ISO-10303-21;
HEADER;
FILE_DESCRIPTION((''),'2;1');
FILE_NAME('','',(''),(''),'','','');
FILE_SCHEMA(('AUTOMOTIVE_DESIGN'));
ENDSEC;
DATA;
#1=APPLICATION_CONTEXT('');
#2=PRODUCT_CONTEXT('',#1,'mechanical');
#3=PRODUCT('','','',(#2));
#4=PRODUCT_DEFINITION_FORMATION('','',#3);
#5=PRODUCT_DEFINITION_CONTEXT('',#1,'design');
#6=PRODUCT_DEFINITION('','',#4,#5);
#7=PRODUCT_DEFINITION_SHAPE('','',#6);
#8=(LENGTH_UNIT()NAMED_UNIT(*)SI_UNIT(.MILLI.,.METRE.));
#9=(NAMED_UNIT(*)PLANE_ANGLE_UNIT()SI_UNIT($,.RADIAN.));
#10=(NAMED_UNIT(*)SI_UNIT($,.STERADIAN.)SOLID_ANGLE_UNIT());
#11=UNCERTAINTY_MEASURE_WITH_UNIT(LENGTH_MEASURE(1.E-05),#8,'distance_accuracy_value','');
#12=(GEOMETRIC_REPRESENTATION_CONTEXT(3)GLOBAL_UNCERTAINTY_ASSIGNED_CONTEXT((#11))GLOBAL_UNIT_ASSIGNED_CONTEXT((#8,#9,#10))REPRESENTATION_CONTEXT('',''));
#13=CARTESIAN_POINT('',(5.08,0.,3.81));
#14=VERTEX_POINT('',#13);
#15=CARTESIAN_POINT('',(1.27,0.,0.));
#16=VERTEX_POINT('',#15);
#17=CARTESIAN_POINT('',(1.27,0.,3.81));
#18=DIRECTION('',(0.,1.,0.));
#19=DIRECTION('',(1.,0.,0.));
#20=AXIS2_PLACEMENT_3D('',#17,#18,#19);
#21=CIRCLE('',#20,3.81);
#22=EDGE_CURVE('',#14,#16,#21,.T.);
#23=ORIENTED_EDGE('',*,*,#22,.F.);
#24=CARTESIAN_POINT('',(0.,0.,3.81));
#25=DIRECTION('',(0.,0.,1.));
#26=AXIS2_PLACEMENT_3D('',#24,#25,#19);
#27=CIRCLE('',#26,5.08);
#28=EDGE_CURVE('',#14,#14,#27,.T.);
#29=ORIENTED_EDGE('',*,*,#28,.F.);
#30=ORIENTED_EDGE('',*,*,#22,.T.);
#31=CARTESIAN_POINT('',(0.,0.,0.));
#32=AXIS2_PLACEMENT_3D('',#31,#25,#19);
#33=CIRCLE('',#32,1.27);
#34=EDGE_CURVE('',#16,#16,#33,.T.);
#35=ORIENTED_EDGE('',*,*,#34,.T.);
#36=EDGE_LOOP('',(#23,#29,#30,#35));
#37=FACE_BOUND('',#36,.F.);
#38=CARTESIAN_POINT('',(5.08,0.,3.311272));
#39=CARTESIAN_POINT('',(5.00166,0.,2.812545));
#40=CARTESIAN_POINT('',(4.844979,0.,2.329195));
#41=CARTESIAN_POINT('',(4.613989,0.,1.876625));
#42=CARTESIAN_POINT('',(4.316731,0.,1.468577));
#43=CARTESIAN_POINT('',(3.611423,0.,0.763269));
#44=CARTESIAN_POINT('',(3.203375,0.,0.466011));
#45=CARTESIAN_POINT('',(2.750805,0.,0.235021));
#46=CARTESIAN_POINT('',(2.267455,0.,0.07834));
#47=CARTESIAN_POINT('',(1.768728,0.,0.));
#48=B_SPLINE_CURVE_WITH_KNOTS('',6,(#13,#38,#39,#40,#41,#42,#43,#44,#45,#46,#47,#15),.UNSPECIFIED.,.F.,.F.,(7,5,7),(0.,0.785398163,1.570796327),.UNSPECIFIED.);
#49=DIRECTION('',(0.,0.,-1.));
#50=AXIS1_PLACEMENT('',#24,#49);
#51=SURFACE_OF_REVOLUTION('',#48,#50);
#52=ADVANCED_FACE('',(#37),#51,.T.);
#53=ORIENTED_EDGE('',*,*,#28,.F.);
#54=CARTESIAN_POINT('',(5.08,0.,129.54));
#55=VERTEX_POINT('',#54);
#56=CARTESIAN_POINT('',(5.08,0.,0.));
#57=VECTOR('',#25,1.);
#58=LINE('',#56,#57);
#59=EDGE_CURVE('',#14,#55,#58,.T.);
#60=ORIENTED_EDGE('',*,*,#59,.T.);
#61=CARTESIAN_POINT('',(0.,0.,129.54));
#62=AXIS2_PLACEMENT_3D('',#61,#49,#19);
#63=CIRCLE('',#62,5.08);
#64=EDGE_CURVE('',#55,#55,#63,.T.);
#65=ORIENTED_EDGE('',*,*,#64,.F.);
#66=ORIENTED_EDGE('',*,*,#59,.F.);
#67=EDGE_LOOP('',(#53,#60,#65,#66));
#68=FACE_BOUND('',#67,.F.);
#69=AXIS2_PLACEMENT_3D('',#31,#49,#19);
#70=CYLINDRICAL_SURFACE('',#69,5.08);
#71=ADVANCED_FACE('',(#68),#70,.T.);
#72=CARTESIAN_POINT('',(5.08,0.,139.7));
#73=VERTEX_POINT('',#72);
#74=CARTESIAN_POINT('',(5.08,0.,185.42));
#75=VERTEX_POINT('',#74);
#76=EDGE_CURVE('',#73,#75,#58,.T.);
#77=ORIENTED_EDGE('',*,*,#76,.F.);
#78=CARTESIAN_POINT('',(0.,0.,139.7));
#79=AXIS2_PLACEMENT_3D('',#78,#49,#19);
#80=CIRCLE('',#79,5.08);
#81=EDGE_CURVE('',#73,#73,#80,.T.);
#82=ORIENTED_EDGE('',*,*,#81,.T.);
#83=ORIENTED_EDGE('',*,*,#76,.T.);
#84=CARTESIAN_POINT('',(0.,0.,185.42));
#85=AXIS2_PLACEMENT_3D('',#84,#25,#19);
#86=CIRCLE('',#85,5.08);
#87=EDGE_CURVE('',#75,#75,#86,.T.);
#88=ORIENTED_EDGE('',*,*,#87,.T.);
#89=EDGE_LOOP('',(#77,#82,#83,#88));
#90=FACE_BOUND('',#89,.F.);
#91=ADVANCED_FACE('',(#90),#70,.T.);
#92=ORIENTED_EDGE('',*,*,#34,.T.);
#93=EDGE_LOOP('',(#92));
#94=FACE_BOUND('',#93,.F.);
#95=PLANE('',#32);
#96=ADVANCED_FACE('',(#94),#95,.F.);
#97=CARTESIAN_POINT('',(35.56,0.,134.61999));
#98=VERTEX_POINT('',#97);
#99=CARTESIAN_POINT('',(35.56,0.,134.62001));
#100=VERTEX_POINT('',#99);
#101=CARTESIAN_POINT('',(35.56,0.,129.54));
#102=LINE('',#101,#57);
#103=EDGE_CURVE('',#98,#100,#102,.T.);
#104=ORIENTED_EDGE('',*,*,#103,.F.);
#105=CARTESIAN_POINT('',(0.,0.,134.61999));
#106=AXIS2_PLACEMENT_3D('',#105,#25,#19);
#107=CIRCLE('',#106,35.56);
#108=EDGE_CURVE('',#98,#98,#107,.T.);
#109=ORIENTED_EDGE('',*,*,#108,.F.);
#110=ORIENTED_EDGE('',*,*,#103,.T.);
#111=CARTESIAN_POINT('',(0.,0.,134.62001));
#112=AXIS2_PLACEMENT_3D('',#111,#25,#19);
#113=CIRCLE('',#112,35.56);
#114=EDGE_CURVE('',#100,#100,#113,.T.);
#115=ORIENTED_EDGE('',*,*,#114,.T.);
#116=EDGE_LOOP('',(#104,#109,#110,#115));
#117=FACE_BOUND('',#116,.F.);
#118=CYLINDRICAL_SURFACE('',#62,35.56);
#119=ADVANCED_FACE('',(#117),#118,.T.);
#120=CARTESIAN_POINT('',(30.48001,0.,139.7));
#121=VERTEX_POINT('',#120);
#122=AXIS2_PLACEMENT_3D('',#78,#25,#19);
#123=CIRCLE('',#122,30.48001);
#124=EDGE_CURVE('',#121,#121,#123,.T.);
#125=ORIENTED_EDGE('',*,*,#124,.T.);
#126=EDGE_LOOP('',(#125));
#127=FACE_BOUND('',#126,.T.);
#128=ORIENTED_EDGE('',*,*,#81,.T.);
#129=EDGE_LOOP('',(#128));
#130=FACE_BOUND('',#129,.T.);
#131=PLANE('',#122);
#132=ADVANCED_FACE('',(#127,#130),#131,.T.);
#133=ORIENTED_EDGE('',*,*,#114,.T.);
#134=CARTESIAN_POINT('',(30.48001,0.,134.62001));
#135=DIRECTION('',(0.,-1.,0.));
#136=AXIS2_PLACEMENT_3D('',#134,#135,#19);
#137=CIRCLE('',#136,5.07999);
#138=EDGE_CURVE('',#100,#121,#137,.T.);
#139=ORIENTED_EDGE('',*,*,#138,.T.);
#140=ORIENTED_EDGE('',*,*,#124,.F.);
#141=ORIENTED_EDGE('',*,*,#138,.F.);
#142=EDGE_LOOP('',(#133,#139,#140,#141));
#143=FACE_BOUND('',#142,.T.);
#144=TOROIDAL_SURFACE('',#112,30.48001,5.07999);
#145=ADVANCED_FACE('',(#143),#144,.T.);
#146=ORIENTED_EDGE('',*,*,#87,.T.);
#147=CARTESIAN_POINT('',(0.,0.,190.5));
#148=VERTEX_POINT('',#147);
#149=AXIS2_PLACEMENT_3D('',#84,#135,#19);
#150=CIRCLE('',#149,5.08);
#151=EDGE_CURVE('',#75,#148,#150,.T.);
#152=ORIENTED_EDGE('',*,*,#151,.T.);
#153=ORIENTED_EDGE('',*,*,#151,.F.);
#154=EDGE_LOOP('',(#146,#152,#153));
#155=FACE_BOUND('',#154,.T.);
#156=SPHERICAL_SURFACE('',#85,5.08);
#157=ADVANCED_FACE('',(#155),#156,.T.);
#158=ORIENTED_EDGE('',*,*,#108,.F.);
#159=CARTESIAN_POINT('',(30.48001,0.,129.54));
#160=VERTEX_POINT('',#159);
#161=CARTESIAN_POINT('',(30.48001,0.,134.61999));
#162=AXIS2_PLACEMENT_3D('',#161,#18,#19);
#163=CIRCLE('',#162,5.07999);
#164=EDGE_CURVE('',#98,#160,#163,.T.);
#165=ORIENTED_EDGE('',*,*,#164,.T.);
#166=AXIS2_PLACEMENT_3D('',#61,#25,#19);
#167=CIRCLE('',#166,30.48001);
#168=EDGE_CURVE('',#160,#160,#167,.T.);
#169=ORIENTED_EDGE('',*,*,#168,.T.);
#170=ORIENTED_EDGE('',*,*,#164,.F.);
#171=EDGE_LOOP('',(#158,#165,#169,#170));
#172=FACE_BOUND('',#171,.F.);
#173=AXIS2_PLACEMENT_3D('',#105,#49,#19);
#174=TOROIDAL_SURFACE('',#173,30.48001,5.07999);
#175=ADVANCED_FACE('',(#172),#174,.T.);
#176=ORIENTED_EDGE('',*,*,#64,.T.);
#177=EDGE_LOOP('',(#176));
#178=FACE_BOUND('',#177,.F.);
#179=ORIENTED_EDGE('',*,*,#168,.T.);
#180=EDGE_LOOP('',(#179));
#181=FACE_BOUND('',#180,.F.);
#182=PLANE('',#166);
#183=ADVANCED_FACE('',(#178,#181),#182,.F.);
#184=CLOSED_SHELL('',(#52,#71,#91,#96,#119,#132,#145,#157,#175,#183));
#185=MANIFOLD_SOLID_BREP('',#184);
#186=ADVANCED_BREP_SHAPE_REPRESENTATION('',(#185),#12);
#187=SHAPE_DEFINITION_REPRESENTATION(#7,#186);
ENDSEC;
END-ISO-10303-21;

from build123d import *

# Parameters (mm, degrees)
F0_R      = 5.08
F1_DEPTH  = 190.5
F7_R      = 35.56
F8_DEPTH  = 10.16
F9_R      = 5.07999
F11_R     = 7.62
F12_DEPTH = 5.08
F13_R     = 2.53999
F14_R     = 5.08
F16_R     = 3.81


# Not quite as in the source:
# - a fillet or chamfer is up to 0.001 mm smaller than in the source, because OpenCascade refuses the exact size


with BuildPart() as f1:
    # F0 (on Top) → F1 (new body)
    with BuildSketch(Plane.XY):
        Circle(F0_R)
    extrude(amount=F1_DEPTH)

    # F7 (on offset) → F8 (join)
    with BuildSketch(Plane.XY.offset(129.54)):
        Circle(F7_R)
    extrude(amount=F8_DEPTH)

    # F9 (radius 5.08 in the source; OpenCascade refuses exactly that, so slightly less here)
    f9_edges = [f1.edges().sort_by_distance(p)[0] for p in [
        (-35.56, 0, 139.7),
        (-35.56, 0, 129.54),
    ]]
    fillet(f9_edges, radius=F9_R)

    # F14
    f14_edges = [f1.edges().sort_by_distance(p)[0] for p in [
        (-5.08, 0, 190.5),
    ]]
    fillet(f14_edges, radius=F14_R)

    # F16
    f16_edges = [f1.edges().sort_by_distance(p)[0] for p in [
        (-5.08, 0, 0),
    ]]
    fillet(f16_edges, radius=F16_R)


with BuildPart() as f12:
    # F11 (on offset) → F12 (new body)
    with BuildSketch(Plane.XY.offset(193.04)):
        Circle(F11_R)
    extrude(amount=F12_DEPTH)

    # F13 (radius 2.54 in the source; OpenCascade refuses exactly that, so slightly less here)
    f13_edges = [f12.edges().sort_by_distance(p)[0] for p in [
        (-7.62, 0, 193.04),
        (-7.62, 0, 198.12),
    ]]
    fillet(f13_edges, radius=F13_R)


solid = f1.part
